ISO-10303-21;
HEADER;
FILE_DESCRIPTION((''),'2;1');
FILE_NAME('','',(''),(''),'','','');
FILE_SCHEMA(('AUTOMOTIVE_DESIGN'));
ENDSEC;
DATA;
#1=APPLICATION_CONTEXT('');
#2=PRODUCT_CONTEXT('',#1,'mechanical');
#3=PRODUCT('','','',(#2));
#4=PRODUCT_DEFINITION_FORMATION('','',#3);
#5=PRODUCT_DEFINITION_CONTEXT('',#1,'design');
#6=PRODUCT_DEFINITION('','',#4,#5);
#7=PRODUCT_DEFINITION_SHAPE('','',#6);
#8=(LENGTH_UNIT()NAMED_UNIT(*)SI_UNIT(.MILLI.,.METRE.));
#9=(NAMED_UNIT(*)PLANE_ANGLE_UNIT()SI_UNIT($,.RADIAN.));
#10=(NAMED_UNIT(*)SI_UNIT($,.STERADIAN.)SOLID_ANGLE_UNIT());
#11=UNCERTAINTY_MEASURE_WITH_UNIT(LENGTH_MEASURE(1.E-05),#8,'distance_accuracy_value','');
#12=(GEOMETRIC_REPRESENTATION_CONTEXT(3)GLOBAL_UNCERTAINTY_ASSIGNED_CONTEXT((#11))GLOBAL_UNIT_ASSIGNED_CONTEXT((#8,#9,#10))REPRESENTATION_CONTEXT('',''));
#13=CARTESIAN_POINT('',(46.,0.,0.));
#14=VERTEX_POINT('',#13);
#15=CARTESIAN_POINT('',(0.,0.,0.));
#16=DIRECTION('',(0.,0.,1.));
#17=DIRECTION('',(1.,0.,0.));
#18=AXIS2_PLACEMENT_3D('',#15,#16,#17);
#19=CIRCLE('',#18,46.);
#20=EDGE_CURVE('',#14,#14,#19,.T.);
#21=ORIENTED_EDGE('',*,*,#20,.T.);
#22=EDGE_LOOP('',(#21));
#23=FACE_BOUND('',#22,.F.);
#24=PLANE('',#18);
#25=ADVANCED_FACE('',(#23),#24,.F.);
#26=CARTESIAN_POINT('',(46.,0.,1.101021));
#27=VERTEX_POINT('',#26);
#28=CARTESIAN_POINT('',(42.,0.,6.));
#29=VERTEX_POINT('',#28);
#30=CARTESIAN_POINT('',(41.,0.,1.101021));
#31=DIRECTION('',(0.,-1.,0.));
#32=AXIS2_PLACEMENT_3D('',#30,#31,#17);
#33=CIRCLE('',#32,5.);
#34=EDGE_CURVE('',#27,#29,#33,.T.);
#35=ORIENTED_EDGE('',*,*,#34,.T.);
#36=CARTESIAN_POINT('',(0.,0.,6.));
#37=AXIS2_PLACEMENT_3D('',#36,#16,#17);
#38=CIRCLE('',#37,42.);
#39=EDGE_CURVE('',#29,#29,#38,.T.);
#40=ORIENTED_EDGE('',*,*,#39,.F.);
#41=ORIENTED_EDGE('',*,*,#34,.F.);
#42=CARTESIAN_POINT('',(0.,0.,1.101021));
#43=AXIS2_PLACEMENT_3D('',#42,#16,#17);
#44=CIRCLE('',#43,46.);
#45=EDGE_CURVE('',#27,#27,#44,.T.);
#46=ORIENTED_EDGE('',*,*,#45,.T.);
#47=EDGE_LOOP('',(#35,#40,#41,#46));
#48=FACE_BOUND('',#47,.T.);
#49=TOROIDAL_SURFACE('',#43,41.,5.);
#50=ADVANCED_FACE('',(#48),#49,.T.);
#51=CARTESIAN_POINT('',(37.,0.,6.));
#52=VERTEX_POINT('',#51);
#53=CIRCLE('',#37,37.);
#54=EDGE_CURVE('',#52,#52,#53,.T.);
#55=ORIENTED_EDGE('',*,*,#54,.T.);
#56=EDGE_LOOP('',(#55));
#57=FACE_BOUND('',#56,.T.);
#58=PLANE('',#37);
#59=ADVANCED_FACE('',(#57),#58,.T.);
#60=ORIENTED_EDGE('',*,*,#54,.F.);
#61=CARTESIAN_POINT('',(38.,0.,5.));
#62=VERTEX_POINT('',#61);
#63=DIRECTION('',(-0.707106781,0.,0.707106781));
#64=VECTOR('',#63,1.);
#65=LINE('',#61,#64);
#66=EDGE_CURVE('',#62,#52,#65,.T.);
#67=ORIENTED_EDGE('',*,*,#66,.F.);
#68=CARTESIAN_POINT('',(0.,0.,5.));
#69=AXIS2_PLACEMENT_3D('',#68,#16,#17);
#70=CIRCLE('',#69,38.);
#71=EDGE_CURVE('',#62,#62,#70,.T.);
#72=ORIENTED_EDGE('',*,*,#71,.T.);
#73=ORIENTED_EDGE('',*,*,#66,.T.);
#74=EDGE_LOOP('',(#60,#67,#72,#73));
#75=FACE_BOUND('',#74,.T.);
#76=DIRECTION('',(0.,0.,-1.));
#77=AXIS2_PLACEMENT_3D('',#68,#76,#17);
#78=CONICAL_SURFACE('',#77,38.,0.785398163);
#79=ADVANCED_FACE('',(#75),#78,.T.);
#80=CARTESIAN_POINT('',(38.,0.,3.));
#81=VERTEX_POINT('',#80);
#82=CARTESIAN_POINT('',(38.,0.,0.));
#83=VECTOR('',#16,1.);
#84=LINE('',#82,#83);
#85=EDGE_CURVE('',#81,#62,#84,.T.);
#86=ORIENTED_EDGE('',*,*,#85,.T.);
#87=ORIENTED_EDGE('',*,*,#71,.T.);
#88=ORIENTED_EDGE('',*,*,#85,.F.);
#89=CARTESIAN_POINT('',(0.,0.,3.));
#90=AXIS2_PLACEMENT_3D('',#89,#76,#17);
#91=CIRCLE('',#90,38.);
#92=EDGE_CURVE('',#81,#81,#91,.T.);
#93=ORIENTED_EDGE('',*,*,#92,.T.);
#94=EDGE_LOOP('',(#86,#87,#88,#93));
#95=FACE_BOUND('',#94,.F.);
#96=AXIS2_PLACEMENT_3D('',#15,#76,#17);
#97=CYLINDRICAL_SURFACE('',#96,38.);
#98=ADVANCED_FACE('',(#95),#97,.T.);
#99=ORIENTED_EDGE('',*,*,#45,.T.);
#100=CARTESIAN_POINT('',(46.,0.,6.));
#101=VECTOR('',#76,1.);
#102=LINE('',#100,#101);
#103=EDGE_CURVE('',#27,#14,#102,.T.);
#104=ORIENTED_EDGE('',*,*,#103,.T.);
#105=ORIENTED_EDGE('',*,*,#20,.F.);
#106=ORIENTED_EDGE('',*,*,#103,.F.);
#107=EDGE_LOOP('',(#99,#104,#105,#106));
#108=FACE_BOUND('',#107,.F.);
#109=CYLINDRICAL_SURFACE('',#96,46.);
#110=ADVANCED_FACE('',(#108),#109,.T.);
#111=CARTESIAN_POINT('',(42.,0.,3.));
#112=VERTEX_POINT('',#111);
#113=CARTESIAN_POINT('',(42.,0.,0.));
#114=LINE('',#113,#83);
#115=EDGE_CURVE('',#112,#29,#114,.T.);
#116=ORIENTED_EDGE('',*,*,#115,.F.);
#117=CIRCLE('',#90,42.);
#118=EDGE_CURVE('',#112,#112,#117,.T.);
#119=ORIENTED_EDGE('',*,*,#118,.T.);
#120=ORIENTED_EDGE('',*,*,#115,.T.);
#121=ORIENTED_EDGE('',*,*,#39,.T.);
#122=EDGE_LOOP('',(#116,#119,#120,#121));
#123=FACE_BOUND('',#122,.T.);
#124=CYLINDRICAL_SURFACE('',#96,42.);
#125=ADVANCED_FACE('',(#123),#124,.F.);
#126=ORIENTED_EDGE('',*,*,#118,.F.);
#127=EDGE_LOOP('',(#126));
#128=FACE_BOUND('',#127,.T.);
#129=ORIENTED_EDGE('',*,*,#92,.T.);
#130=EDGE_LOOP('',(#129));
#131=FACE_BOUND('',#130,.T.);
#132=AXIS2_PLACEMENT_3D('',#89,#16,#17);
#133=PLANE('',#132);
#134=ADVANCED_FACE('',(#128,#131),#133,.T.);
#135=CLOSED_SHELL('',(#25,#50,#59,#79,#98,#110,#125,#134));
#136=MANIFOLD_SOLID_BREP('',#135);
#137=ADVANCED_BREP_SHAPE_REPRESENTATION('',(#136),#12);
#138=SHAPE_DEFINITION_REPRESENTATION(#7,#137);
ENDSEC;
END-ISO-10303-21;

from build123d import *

# Parameters (mm, degrees)
F0_R     = 46
F0_R_2   = 42
F0_R_3   = 38
F1_DEPTH = 3
F2_DEPTH = 6
F4_SIZE  = 1


# Not quite as in the source:
# - a fillet or chamfer that OpenCascade refuses, or shapes differently, is made with other operations: its cross-section is extruded or revolved along the edge and cut away or added


with BuildPart() as f1:
    # F0 (on Top) → F1 (new body)
    with BuildSketch(Plane.XY):
        Circle(F0_R)
        Circle(F0_R_2, mode=Mode.SUBTRACT)
        Circle(F0_R_2)
        Circle(F0_R_3, mode=Mode.SUBTRACT)
        Circle(F0_R_3)
    extrude(amount=F1_DEPTH)

    # F0 (on Top) → F2 (join)
    with BuildSketch(Plane.XY):
        Circle(F0_R)
        Circle(F0_R_2, mode=Mode.SUBTRACT)
        Circle(F0_R_3)
    extrude(amount=F2_DEPTH)

    # F3: fillet of radius 5 on 1 edges, made by hand

    # F3_s1 → F3_t2 (revolve, cut)
    with BuildSketch(Plane.XZ):
        with BuildLine():
            ThreePointArc((46, 1.1010205144), (44.8729833462, 4.2632981746), (42, 6))
            Line((42, 6), (46, 6))
            Line((46, 6), (46, 1.1010205144))
        make_face()
    revolve(axis=Axis((0, 0, 6), (0, 0, 1)), mode=Mode.SUBTRACT)

    # F4
    f4_edges = [f1.edges().sort_by_distance(p)[0] for p in [
        (-38, 0, 6),
    ]]
    chamfer(f4_edges, length=F4_SIZE)


solid = f1.part
